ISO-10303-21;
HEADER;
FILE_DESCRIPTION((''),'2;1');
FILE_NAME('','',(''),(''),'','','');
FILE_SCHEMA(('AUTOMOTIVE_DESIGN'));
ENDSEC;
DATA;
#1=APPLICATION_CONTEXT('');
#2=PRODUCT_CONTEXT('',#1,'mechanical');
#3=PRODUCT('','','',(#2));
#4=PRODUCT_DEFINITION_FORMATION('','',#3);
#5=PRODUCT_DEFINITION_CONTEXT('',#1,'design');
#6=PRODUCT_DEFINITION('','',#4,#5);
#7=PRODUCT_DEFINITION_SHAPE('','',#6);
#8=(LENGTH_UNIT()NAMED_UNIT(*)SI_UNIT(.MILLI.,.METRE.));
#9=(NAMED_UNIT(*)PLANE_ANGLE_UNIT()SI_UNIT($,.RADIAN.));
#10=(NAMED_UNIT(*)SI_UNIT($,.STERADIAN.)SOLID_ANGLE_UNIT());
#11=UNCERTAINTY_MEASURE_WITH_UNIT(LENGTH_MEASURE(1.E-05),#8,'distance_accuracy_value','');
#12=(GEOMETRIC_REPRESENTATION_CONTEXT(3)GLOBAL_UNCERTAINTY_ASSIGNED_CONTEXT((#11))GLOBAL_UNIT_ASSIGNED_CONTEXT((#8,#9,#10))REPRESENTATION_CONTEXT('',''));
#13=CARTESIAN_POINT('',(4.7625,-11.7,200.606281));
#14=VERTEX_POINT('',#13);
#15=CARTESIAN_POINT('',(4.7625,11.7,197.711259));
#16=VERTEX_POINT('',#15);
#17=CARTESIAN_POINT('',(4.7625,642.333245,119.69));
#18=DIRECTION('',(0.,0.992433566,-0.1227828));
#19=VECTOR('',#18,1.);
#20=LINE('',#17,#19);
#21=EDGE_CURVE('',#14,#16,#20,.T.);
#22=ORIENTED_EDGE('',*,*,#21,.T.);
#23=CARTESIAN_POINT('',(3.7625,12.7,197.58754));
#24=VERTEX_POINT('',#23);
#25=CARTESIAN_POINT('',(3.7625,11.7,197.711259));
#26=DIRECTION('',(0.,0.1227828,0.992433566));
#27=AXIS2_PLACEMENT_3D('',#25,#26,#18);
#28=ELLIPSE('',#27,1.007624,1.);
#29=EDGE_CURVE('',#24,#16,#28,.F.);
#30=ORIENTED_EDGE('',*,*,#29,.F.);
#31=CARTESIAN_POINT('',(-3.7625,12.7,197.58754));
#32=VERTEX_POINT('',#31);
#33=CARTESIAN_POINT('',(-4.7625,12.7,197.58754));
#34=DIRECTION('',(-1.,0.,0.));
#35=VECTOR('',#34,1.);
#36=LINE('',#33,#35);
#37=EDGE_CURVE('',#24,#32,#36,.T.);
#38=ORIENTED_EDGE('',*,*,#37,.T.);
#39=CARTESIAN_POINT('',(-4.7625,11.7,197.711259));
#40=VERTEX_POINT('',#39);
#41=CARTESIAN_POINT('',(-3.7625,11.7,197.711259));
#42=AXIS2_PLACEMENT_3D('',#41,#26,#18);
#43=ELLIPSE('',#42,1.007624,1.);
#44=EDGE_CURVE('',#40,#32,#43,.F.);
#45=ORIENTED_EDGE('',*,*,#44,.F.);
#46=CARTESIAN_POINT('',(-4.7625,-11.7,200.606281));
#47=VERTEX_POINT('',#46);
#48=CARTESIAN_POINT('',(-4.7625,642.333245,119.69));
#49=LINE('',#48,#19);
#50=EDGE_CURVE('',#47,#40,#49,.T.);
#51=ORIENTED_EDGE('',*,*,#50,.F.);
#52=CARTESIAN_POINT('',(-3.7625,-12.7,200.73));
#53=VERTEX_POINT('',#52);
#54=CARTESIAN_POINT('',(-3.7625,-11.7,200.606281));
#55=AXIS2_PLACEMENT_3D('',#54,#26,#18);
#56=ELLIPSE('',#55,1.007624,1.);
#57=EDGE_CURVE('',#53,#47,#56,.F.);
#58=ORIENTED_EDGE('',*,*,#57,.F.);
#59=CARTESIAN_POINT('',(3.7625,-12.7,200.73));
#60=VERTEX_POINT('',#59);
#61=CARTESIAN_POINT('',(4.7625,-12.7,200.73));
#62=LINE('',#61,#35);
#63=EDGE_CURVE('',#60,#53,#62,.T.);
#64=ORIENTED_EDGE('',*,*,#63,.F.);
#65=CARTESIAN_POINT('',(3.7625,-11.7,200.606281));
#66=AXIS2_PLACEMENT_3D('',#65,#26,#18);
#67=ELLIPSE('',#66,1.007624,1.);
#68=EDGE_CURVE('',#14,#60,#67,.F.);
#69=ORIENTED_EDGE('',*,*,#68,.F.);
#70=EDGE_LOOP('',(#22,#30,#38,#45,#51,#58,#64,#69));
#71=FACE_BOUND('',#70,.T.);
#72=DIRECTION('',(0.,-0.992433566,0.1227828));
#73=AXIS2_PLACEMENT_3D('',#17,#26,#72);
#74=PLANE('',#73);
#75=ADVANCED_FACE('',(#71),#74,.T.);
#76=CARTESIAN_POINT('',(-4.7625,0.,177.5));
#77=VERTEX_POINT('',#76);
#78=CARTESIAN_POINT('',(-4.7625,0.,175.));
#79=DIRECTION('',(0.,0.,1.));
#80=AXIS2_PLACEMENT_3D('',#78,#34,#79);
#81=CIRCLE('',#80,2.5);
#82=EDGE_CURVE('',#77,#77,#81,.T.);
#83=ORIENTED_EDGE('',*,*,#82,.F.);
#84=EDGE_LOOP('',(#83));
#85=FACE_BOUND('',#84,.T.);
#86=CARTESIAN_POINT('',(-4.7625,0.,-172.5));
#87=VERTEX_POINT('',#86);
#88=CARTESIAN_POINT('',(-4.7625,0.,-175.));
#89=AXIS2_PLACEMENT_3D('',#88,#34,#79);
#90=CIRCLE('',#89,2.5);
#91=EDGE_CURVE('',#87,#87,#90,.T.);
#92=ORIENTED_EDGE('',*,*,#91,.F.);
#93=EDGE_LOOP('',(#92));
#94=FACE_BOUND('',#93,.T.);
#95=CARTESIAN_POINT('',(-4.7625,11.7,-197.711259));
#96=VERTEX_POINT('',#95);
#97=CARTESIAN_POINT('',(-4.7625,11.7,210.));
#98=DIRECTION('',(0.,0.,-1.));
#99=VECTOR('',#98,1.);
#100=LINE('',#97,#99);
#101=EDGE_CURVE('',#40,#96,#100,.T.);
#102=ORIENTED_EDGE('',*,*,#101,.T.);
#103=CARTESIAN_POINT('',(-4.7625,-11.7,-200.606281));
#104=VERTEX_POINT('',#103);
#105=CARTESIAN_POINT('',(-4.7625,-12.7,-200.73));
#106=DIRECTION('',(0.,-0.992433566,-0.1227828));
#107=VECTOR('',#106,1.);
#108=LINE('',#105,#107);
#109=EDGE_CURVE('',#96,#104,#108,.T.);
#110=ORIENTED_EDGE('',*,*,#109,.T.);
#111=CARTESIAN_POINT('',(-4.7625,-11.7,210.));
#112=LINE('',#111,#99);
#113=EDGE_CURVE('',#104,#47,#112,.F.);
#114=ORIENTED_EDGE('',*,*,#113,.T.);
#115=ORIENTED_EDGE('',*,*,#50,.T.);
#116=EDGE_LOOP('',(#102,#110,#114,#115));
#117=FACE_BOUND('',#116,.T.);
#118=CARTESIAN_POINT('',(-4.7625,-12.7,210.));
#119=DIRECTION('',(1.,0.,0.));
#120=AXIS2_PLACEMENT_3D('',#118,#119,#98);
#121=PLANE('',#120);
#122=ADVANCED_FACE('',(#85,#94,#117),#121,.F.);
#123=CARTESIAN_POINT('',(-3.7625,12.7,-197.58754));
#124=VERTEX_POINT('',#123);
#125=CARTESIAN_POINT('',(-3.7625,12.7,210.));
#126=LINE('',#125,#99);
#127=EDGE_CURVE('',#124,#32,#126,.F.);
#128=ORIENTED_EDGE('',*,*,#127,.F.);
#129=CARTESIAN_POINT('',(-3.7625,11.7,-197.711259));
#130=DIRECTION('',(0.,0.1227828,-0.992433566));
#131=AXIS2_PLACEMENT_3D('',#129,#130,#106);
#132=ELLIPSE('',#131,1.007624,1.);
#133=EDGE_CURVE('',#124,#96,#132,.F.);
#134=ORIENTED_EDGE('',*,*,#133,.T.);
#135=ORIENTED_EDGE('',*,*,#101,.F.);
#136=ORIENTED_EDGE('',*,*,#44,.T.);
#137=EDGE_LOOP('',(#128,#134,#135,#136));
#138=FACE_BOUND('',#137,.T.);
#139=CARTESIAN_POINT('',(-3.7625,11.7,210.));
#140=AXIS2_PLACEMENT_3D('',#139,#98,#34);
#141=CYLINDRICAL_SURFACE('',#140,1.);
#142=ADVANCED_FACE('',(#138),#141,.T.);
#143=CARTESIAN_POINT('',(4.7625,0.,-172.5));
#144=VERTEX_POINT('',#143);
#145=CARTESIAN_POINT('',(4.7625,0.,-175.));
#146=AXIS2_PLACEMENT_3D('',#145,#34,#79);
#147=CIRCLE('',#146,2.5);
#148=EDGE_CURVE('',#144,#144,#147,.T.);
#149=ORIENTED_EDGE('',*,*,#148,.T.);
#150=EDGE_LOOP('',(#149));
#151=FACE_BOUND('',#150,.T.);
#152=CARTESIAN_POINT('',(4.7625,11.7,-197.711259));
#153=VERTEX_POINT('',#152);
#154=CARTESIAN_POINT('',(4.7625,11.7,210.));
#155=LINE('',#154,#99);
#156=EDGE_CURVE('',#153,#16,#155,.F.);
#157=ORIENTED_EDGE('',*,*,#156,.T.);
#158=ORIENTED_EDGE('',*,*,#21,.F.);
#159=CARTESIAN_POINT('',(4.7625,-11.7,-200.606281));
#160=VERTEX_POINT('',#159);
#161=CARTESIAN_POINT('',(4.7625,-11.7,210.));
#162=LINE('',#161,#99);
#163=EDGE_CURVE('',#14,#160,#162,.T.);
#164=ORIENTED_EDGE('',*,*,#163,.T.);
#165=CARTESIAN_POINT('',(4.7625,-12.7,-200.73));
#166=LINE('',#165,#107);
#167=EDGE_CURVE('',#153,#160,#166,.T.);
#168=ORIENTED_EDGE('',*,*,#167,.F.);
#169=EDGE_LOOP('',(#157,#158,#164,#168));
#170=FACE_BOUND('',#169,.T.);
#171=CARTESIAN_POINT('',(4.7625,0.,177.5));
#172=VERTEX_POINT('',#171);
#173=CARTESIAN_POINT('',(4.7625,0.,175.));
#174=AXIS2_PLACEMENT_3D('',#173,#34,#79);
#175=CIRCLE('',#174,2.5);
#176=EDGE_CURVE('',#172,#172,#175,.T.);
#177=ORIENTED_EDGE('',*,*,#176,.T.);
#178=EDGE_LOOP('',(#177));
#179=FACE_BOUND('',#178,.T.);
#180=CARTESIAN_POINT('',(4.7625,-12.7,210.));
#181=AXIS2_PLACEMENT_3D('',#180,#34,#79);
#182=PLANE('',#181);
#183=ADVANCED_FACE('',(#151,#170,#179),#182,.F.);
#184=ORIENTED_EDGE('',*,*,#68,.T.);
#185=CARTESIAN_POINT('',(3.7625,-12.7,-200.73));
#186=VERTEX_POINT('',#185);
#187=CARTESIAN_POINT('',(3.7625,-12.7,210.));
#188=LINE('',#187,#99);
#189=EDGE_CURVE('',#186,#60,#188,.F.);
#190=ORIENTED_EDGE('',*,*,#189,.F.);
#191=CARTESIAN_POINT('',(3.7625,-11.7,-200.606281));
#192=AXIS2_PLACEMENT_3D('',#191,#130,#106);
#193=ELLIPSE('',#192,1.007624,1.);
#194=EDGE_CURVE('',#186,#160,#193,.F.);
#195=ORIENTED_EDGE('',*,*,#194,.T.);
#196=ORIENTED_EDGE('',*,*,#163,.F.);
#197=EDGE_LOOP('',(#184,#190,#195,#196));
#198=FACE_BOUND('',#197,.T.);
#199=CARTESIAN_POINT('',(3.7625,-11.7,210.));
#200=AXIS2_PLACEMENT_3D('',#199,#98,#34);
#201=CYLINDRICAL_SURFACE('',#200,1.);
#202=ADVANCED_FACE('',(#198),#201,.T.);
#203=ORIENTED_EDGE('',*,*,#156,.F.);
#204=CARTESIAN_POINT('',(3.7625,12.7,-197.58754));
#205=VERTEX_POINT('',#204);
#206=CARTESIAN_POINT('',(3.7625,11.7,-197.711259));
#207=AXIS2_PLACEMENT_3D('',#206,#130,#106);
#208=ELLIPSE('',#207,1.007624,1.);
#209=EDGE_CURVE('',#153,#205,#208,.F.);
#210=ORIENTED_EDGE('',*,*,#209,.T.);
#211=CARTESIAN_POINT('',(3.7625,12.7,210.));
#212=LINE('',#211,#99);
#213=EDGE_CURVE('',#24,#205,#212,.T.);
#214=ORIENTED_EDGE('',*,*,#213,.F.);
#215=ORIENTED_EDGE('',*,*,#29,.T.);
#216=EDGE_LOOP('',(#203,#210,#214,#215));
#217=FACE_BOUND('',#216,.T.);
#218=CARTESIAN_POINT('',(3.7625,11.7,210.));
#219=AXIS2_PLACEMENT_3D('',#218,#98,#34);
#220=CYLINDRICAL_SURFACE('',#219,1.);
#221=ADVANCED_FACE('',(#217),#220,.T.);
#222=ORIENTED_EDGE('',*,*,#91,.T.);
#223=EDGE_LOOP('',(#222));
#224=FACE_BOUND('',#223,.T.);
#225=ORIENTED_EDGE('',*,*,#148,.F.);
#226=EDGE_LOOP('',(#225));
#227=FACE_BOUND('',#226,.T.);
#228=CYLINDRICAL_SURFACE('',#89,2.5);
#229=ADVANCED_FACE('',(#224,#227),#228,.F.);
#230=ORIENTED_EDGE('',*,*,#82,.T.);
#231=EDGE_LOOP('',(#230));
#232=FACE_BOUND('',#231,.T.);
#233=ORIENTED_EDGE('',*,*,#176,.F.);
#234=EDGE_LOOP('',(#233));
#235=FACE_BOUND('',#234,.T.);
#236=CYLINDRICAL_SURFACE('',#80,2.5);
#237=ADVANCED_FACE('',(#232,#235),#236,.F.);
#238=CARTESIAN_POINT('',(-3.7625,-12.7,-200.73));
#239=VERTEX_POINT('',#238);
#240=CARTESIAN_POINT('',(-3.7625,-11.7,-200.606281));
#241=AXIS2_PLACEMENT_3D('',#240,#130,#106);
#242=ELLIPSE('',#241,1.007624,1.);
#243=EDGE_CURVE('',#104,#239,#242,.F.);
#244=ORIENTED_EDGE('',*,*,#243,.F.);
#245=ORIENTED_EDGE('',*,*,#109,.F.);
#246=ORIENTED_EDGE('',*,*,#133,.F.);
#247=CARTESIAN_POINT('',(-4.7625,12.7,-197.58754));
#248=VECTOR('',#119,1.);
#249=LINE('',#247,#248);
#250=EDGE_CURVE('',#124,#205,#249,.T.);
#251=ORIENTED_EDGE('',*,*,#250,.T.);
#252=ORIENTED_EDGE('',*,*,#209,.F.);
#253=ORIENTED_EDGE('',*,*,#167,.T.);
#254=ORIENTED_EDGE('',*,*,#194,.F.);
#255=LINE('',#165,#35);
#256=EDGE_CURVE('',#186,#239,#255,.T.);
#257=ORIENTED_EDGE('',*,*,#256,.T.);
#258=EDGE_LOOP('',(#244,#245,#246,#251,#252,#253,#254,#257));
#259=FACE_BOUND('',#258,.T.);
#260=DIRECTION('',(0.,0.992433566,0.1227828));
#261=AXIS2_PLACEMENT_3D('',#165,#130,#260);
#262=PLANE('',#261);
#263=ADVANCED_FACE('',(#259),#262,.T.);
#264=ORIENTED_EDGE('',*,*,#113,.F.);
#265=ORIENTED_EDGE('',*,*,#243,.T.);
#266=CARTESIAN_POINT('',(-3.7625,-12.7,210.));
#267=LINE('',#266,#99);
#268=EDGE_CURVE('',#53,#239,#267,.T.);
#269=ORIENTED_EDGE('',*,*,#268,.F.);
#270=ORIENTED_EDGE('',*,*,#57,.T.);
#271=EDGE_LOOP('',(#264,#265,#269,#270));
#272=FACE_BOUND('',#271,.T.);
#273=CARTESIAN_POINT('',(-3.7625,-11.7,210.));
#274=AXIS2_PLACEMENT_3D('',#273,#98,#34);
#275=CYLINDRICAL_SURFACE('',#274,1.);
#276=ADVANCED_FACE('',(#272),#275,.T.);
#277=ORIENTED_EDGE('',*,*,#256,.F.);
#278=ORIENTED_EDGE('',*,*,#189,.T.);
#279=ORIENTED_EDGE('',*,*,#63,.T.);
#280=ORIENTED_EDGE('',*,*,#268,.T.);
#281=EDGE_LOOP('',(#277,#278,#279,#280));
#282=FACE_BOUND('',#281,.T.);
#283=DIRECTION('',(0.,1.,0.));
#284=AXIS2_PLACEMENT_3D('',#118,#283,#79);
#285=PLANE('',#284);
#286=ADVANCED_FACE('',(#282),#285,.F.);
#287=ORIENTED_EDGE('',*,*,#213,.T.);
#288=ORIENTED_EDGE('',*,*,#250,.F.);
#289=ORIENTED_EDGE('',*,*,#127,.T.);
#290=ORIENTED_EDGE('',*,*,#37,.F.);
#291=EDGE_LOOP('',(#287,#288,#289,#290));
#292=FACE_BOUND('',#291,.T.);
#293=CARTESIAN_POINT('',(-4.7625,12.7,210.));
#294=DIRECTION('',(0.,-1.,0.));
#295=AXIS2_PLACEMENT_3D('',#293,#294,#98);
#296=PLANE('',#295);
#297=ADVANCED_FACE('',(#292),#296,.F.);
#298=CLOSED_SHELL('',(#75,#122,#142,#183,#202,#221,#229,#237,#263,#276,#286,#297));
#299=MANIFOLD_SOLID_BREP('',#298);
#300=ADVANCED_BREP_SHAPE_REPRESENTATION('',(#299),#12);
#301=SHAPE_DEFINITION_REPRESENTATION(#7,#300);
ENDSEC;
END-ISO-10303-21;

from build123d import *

# Parameters (mm, degrees)
ESBO_O1_W                 = 9.525
ESBO_O1_H                 = 25.4
RESSALTO_EXTRUS_O1_DEPTH  = 210
FILETE1_R                 = 1
CORTE_EXTRUS_O1_START     = -9.525
CORTE_EXTRUS_O1_DEPTH     = 9.525
FURO_ROSCADO_DE_M6X1_01_D = 5


# Read off the part's stored shape, not the designer's step: Corte-extrusão1
with BuildPart() as part:
    # Esboço1 → Ressalto-extrusão1 (new, symmetric)
    with BuildSketch(Plane.XY):
        Rectangle(ESBO_O1_W, ESBO_O1_H)
    extrude(amount=RESSALTO_EXTRUS_O1_DEPTH, both=True)

    # Filete1
    filete1_edges = [part.edges().sort_by_distance(p)[0] for p in [
        (4.7625, -12.7, 0),
        (-4.7625, -12.7, 0),
        (-4.7625, 12.7, 0),
        (4.7625, 12.7, 0),
    ]]
    fillet(filete1_edges, radius=FILETE1_R)

    # Corte-extrusão1 outline → Corte-extrusão1 (cut)
    with BuildSketch(Plane.ZY.offset(4.7625).offset(CORTE_EXTRUS_O1_START)):
        Polygon((197.587539651, 12.7), (200.73, -12.7), (210, -12.7), (210, 12.7), align=None)
        Polygon((-210, -12.7), (-200.73, -12.7), (-197.587539651, 12.7), (-210, 12.7), align=None)
    extrude(amount=CORTE_EXTRUS_O1_DEPTH, mode=Mode.SUBTRACT)

    # Furo roscado de M6x1.01 (through all)
    with Locations(Plane.ZY.offset(4.7625)):
        with Locations((-175, 0), (175, 0)):
            Hole(FURO_ROSCADO_DE_M6X1_01_D / 2)


solid = part.part
